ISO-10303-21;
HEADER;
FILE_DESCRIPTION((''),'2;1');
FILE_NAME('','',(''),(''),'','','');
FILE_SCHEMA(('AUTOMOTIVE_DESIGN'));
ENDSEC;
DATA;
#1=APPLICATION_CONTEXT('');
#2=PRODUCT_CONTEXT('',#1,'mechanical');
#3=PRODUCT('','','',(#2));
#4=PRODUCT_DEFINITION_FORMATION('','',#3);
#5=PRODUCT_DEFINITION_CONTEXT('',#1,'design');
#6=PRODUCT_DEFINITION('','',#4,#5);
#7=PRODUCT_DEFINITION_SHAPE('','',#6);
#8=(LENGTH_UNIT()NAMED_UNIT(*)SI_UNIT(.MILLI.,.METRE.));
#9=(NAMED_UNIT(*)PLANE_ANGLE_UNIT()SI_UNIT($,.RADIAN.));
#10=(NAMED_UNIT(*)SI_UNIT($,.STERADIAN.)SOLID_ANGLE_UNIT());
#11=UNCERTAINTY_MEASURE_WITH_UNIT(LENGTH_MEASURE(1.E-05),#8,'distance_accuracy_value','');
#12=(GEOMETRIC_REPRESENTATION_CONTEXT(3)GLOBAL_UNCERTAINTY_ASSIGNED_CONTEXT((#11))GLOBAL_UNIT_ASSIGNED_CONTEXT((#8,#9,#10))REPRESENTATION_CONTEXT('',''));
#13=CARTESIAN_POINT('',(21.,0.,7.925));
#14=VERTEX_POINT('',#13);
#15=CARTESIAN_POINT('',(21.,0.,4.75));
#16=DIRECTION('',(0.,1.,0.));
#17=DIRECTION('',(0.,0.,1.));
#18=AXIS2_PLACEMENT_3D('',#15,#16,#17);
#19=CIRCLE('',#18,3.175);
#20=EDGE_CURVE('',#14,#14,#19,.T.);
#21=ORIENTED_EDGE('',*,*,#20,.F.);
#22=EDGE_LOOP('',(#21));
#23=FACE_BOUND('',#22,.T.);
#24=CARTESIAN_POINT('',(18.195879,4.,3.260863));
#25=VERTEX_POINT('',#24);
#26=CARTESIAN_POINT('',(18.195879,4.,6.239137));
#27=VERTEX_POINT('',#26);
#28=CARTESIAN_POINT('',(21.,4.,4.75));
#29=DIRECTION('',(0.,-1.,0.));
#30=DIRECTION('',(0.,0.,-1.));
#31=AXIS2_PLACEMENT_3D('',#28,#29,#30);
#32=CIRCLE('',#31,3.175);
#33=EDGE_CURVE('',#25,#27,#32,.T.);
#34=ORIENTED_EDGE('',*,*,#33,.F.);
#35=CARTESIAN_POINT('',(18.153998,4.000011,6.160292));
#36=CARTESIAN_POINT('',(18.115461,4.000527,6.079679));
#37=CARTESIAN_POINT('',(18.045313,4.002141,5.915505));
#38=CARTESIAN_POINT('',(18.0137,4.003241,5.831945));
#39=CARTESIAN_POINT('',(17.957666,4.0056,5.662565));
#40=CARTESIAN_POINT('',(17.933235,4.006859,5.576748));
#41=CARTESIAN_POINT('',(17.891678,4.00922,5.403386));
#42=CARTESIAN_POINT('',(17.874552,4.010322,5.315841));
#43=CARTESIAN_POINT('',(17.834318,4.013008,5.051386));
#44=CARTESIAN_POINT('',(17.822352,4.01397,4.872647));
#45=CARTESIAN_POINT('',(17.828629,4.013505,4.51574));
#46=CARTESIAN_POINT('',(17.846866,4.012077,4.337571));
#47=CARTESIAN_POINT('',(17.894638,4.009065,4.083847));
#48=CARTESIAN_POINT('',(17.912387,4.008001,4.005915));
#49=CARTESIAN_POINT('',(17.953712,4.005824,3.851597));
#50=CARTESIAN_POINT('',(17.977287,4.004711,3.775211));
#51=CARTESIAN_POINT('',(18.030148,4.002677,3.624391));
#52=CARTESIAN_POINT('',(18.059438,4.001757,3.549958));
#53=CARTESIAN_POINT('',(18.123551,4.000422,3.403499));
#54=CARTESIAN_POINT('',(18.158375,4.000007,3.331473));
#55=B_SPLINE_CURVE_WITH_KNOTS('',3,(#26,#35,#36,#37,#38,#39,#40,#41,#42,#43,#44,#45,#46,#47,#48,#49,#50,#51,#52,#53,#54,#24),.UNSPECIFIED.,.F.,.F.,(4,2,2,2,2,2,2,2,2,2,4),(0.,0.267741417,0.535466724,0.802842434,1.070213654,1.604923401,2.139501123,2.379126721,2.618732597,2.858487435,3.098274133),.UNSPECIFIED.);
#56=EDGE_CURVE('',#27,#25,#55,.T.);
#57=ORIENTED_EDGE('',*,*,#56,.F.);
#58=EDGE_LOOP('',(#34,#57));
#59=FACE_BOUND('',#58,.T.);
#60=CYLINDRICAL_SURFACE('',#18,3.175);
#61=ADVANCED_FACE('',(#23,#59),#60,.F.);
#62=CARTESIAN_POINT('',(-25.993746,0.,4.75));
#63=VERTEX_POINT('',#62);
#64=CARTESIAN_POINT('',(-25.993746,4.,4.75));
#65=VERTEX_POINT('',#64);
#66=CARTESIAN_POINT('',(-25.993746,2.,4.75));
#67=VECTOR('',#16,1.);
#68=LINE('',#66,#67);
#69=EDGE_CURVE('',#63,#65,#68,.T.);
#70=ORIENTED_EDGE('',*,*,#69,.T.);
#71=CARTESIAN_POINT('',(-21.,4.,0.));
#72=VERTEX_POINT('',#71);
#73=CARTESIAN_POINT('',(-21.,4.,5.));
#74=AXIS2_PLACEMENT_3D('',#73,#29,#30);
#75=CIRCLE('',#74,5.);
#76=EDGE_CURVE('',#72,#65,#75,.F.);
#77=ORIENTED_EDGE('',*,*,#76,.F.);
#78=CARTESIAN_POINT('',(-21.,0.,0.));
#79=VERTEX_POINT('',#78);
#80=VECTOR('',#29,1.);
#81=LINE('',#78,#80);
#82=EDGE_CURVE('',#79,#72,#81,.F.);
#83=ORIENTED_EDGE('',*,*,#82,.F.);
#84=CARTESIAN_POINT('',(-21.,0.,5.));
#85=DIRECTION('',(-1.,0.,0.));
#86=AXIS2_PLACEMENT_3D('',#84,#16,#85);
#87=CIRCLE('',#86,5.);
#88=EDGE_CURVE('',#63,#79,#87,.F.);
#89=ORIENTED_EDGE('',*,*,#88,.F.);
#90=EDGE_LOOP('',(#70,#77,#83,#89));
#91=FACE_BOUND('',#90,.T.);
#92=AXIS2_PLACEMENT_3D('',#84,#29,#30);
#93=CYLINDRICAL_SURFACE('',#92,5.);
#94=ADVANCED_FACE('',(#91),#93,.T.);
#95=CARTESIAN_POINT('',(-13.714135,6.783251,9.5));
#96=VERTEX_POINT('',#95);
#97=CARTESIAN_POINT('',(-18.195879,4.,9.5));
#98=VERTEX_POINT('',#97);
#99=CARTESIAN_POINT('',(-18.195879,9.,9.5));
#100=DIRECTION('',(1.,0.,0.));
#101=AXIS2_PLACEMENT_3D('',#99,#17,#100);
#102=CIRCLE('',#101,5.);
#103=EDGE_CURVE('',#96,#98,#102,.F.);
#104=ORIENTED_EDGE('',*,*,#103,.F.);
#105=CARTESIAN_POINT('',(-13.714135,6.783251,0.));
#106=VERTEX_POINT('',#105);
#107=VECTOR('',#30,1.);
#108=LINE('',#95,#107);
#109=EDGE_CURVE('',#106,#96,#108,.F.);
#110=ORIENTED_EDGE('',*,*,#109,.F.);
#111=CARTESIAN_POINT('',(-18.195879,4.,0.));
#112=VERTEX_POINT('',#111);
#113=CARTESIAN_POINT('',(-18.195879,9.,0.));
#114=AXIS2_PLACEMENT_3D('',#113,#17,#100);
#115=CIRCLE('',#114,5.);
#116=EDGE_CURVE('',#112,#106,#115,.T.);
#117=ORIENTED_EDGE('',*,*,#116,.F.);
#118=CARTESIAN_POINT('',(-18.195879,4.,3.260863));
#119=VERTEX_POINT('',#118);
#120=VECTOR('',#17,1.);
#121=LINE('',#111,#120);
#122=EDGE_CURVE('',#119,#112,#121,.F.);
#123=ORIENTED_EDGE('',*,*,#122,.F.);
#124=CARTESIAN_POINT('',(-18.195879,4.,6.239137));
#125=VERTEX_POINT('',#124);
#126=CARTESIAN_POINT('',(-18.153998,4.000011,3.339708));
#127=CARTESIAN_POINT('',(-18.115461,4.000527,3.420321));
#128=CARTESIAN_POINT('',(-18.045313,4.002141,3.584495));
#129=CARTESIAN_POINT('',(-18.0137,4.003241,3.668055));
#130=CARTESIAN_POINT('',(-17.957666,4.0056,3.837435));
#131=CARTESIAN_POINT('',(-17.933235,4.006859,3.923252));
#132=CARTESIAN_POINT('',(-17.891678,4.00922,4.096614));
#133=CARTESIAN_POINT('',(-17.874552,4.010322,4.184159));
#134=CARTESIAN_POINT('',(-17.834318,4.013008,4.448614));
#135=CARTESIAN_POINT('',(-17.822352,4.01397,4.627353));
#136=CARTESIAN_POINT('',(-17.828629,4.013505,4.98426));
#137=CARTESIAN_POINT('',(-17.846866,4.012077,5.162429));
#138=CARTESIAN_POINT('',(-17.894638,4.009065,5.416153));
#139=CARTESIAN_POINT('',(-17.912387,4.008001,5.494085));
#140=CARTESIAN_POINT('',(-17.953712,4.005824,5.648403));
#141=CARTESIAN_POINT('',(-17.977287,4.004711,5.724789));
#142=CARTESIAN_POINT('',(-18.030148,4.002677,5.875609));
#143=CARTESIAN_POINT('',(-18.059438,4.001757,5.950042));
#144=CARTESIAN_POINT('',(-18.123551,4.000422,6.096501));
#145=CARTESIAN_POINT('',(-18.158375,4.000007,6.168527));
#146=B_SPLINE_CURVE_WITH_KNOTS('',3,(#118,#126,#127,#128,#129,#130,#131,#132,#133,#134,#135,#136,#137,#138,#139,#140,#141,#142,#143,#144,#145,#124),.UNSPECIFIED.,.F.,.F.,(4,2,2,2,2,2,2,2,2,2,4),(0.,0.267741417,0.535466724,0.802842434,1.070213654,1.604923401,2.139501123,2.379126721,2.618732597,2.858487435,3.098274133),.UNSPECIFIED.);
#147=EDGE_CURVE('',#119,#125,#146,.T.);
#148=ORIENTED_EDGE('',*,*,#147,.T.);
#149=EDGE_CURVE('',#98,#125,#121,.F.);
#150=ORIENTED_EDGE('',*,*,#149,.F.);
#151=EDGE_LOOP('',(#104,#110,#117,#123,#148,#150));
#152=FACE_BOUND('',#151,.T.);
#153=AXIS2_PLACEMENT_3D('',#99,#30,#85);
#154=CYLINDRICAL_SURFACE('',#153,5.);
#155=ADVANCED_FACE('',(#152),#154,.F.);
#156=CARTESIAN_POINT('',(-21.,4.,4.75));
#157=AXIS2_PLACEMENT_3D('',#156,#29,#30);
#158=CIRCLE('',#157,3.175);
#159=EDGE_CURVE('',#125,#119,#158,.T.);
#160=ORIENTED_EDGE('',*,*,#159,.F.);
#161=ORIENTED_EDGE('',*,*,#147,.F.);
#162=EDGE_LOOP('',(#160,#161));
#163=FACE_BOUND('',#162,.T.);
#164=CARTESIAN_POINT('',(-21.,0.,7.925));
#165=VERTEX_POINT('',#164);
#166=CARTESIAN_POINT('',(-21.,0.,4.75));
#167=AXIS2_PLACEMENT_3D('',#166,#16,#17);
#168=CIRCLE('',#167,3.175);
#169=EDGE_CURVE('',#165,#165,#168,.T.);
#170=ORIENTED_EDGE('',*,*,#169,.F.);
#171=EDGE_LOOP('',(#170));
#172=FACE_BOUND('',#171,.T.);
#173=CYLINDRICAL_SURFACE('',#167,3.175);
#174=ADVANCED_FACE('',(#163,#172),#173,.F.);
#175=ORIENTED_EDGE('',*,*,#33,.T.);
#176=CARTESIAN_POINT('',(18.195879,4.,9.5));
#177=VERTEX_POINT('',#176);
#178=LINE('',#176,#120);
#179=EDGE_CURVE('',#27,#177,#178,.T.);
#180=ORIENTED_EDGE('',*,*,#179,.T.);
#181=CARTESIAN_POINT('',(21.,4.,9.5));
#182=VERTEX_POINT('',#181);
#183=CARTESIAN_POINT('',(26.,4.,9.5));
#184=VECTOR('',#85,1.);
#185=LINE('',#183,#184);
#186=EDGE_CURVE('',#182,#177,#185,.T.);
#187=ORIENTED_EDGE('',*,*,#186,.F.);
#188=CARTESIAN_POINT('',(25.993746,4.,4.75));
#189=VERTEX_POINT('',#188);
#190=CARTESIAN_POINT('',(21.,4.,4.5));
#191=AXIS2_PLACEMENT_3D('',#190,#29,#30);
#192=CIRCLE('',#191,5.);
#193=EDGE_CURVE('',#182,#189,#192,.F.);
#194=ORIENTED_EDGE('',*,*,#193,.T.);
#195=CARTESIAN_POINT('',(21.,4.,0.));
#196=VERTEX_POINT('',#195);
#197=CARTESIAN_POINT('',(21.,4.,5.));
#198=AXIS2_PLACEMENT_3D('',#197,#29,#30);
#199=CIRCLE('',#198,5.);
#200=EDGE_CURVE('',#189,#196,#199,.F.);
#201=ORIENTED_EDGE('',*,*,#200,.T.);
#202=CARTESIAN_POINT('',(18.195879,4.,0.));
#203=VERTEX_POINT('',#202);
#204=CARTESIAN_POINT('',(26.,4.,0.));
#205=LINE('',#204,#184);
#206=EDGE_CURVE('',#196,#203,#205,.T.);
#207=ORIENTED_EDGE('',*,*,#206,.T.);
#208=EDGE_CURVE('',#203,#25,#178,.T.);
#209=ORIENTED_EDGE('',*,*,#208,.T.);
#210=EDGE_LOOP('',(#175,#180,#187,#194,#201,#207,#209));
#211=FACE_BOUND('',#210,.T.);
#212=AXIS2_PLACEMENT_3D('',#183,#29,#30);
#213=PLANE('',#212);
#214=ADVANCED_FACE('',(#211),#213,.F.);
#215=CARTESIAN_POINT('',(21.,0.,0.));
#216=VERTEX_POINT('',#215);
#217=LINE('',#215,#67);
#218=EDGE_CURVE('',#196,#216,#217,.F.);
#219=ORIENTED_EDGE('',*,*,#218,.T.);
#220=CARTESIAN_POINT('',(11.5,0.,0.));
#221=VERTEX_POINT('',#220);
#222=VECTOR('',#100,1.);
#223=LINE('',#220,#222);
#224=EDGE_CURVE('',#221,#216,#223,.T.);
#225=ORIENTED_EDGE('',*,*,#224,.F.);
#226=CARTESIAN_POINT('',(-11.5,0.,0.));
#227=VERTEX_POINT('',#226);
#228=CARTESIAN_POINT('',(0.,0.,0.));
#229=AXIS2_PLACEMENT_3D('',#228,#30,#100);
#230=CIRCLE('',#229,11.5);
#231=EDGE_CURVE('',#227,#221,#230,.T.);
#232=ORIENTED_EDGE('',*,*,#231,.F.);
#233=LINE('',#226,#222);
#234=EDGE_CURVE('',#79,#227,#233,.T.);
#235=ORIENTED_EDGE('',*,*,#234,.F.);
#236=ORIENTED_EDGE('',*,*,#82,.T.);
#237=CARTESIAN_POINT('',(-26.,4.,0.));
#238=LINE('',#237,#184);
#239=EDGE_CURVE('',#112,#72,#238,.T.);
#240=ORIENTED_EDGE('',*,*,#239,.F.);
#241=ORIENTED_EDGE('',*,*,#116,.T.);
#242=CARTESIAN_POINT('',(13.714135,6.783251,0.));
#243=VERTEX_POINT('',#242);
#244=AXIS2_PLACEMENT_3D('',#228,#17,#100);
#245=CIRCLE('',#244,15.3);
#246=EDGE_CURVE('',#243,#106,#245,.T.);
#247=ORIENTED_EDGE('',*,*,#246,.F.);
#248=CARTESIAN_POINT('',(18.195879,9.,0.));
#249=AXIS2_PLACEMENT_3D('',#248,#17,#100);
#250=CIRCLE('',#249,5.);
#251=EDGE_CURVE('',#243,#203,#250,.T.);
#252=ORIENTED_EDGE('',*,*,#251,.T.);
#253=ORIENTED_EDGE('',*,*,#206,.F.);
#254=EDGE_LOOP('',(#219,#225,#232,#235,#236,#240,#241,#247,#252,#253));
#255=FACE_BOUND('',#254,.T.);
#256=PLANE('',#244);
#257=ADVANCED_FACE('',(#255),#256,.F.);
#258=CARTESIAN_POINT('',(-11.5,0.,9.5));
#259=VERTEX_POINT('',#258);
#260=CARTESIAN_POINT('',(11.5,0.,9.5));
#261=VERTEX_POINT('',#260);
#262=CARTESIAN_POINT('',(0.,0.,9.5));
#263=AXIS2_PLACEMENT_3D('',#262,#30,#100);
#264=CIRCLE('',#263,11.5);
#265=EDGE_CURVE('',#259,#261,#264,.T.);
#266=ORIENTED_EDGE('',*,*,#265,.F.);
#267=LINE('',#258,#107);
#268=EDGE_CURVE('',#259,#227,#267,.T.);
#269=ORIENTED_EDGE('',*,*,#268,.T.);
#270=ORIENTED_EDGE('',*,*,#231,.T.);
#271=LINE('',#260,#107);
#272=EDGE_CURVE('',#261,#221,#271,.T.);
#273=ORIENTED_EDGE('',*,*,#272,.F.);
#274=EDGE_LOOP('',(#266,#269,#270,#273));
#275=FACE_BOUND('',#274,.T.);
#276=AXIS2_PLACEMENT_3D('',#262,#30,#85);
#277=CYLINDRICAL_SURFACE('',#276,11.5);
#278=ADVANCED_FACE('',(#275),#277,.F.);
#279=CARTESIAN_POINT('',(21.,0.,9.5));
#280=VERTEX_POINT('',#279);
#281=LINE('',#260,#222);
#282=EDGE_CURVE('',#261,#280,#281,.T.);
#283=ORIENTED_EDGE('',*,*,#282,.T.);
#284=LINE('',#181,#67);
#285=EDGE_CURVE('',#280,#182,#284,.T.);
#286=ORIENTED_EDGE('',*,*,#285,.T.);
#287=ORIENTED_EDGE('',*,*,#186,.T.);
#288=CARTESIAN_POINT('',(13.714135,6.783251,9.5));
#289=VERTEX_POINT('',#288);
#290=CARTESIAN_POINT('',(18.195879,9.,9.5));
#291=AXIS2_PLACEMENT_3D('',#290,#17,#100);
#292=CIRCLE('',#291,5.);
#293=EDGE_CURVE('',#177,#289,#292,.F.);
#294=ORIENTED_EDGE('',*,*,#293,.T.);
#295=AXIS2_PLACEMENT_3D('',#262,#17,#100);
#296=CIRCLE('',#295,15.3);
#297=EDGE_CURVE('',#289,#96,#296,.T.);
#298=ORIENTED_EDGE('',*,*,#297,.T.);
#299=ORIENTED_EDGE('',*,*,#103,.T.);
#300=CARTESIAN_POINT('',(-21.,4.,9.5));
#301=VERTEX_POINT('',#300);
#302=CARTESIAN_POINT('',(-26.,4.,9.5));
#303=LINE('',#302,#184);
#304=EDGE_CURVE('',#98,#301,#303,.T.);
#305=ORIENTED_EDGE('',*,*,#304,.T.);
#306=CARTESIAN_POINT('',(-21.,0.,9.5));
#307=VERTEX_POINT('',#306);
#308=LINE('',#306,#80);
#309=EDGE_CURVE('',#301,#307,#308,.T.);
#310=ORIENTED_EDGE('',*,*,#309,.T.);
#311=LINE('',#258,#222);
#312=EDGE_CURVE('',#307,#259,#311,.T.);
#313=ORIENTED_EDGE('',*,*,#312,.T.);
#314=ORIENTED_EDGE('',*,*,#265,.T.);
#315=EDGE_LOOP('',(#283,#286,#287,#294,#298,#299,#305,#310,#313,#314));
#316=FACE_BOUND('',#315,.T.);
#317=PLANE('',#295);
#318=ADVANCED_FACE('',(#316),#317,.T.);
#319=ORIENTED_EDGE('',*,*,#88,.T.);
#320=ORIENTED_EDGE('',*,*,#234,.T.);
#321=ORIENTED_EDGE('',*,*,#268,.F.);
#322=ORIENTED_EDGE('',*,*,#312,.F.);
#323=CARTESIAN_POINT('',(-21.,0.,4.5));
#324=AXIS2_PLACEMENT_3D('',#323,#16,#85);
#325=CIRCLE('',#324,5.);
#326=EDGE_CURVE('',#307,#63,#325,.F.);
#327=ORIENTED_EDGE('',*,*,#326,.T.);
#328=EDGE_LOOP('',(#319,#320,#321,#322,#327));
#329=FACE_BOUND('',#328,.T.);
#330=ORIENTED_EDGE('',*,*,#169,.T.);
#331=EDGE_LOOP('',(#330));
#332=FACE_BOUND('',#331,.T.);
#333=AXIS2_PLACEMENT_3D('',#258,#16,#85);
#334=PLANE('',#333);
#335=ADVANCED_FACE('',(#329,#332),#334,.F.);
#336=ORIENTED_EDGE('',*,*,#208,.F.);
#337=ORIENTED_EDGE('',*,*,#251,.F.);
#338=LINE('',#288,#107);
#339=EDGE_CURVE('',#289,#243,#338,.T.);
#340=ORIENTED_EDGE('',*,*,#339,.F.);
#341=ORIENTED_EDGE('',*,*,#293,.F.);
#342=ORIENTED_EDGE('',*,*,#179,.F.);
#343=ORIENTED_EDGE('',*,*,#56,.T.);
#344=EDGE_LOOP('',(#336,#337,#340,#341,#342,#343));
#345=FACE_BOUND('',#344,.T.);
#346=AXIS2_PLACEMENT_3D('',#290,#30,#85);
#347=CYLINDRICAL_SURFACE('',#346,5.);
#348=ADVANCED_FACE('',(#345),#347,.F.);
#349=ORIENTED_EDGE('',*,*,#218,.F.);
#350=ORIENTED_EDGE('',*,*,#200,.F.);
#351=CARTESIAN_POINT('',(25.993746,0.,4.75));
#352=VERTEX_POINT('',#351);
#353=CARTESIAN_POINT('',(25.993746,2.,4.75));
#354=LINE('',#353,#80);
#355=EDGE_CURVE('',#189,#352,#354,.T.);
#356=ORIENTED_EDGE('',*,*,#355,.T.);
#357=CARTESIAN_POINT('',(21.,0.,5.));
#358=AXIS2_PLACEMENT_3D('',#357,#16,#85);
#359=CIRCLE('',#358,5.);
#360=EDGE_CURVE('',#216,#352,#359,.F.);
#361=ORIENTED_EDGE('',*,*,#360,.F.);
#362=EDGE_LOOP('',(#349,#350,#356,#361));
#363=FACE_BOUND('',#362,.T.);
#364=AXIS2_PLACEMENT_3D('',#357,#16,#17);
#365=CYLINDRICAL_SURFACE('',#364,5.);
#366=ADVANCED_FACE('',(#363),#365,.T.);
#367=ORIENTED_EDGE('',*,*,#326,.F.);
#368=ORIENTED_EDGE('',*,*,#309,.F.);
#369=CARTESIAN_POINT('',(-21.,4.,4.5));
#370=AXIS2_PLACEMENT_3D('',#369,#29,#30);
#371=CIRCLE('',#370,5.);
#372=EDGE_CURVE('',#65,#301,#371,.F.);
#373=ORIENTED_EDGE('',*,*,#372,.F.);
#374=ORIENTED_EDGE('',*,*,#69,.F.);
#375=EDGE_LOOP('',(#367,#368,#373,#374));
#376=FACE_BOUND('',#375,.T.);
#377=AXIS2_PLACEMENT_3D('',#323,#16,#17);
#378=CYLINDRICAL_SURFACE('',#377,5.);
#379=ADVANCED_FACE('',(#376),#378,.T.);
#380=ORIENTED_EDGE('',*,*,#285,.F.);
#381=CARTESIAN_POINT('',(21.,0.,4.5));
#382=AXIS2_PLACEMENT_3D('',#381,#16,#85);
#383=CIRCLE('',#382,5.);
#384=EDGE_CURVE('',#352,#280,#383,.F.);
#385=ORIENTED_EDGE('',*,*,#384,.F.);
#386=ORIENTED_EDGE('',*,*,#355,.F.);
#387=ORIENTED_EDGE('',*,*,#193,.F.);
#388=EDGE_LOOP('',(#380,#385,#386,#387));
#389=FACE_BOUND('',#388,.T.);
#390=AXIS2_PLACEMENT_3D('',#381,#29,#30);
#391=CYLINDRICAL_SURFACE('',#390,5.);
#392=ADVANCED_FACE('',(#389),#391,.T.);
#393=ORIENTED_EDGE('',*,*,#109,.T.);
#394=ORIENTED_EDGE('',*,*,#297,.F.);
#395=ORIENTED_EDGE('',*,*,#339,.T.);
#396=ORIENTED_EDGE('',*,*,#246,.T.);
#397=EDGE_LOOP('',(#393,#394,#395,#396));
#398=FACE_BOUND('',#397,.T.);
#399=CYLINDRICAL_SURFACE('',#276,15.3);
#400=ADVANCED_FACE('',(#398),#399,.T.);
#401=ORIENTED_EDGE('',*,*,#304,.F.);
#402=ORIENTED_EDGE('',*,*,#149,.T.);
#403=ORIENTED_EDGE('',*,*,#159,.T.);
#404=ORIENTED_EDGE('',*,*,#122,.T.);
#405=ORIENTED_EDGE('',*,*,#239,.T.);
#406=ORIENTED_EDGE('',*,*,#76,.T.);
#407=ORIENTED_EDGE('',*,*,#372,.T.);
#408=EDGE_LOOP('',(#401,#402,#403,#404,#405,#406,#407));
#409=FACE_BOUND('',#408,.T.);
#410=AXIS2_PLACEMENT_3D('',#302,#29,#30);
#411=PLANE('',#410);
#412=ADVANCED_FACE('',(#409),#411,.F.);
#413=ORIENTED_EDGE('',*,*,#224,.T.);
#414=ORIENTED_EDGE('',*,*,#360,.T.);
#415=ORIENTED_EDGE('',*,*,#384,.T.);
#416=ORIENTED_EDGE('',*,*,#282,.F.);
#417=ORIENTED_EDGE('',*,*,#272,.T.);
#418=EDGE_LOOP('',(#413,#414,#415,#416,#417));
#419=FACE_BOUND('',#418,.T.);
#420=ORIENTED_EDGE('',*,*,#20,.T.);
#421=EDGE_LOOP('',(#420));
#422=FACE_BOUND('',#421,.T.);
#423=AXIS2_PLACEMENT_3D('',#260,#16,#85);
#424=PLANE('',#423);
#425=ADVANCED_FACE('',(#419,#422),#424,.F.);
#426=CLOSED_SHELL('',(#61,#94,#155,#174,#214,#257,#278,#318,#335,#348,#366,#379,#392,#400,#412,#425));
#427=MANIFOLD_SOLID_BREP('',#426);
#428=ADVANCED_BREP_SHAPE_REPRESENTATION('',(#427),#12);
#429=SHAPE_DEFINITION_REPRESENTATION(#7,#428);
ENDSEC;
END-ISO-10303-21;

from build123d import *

# Parameters (mm, degrees)
BOSS_EXTRUDE1_DEPTH     = 9.5
FILLET5_R               = 5
CUT_EXTRUDE1_DEPTH      = 30.898829409
CUT_EXTRUDE1_DEPTH_BACK = 30.898829409
SKETCH2_R               = 3.175
FILLET1_R               = 5


with BuildPart() as part:
    # Sketch1 → Boss-Extrude1 (new body)
    with BuildSketch(Plane.XY):
        with BuildLine():
            Line((11.5, 0), (26, 0))
            Line((26, 0), (26, 4))
            Line((26, 4), (14.76787053, 4))
            ThreePointArc((14.76787053, 4), (0, 15.3), (-14.76787053, 4))
            Line((-14.76787053, 4), (-26, 4))
            Line((-26, 4), (-26, 0))
            Line((-26, 0), (-11.5, 0))
            ThreePointArc((-11.5, 0), (0, 11.5), (11.5, 0))
        make_face()
    extrude(amount=BOSS_EXTRUDE1_DEPTH)

    # Fillet5
    fillet5_edges = [part.edges().sort_by_distance(p)[0] for p in [
        (-14.76787053, 4, 4.75),
        (14.76787053, 4, 4.75),
    ]]
    fillet(fillet5_edges, radius=FILLET5_R)

    # Sketch2 → Cut-Extrude1 (cut, two sides: drawn at the far end of the back side and taken through both)
    with BuildSketch(Plane(origin=(0, 4, 0), x_dir=(1, 0, 0), z_dir=(0, 1, 0)).offset(-CUT_EXTRUDE1_DEPTH_BACK)):
        with Locations(Location((-21, -4.75, 0), (0, 0, 270))):
            Circle(SKETCH2_R)
        with Locations(Location((21, -4.75, 0), (0, 0, 270))):
            Circle(SKETCH2_R)
    extrude(amount=CUT_EXTRUDE1_DEPTH + CUT_EXTRUDE1_DEPTH_BACK, mode=Mode.SUBTRACT)

    # Fillet1
    # the kernel refuses this fillet: 5 mm, written as the material it takes off along each edge
    with BuildSketch(Plane(origin=(-26, 16.5, 0), x_dir=(1, 0, 0), z_dir=(0, -1, 0))) as fillet1_piece_1:
        with BuildLine():
            CenterArc((FILLET1_R, FILLET1_R), FILLET1_R, 180, 90)
            Line((0, FILLET1_R), (0, 0))
            Line((0, 0), (FILLET1_R, 0))
        make_face()
    extrude(amount=29, mode=Mode.SUBTRACT)
    with BuildSketch(Plane(origin=(26, -12.5, 0), x_dir=(0, 0, 1), z_dir=(0, 1, 0)), Plane(origin=(26, -12.5, 9.5), x_dir=(-1, 0, 0), z_dir=(0, 1, 0)), Plane(origin=(-26, 16.5, 9.5), x_dir=(1, 0, 0), z_dir=(0, -1, 0))) as fillet1_piece_2:
        with BuildLine():
            CenterArc((FILLET1_R, -FILLET1_R), FILLET1_R, 90, 90)
            Line((0, -FILLET1_R), (0, 0))
            Line((0, 0), (FILLET1_R, 0))
        make_face()
    extrude(amount=29, mode=Mode.SUBTRACT)


solid = part.part
